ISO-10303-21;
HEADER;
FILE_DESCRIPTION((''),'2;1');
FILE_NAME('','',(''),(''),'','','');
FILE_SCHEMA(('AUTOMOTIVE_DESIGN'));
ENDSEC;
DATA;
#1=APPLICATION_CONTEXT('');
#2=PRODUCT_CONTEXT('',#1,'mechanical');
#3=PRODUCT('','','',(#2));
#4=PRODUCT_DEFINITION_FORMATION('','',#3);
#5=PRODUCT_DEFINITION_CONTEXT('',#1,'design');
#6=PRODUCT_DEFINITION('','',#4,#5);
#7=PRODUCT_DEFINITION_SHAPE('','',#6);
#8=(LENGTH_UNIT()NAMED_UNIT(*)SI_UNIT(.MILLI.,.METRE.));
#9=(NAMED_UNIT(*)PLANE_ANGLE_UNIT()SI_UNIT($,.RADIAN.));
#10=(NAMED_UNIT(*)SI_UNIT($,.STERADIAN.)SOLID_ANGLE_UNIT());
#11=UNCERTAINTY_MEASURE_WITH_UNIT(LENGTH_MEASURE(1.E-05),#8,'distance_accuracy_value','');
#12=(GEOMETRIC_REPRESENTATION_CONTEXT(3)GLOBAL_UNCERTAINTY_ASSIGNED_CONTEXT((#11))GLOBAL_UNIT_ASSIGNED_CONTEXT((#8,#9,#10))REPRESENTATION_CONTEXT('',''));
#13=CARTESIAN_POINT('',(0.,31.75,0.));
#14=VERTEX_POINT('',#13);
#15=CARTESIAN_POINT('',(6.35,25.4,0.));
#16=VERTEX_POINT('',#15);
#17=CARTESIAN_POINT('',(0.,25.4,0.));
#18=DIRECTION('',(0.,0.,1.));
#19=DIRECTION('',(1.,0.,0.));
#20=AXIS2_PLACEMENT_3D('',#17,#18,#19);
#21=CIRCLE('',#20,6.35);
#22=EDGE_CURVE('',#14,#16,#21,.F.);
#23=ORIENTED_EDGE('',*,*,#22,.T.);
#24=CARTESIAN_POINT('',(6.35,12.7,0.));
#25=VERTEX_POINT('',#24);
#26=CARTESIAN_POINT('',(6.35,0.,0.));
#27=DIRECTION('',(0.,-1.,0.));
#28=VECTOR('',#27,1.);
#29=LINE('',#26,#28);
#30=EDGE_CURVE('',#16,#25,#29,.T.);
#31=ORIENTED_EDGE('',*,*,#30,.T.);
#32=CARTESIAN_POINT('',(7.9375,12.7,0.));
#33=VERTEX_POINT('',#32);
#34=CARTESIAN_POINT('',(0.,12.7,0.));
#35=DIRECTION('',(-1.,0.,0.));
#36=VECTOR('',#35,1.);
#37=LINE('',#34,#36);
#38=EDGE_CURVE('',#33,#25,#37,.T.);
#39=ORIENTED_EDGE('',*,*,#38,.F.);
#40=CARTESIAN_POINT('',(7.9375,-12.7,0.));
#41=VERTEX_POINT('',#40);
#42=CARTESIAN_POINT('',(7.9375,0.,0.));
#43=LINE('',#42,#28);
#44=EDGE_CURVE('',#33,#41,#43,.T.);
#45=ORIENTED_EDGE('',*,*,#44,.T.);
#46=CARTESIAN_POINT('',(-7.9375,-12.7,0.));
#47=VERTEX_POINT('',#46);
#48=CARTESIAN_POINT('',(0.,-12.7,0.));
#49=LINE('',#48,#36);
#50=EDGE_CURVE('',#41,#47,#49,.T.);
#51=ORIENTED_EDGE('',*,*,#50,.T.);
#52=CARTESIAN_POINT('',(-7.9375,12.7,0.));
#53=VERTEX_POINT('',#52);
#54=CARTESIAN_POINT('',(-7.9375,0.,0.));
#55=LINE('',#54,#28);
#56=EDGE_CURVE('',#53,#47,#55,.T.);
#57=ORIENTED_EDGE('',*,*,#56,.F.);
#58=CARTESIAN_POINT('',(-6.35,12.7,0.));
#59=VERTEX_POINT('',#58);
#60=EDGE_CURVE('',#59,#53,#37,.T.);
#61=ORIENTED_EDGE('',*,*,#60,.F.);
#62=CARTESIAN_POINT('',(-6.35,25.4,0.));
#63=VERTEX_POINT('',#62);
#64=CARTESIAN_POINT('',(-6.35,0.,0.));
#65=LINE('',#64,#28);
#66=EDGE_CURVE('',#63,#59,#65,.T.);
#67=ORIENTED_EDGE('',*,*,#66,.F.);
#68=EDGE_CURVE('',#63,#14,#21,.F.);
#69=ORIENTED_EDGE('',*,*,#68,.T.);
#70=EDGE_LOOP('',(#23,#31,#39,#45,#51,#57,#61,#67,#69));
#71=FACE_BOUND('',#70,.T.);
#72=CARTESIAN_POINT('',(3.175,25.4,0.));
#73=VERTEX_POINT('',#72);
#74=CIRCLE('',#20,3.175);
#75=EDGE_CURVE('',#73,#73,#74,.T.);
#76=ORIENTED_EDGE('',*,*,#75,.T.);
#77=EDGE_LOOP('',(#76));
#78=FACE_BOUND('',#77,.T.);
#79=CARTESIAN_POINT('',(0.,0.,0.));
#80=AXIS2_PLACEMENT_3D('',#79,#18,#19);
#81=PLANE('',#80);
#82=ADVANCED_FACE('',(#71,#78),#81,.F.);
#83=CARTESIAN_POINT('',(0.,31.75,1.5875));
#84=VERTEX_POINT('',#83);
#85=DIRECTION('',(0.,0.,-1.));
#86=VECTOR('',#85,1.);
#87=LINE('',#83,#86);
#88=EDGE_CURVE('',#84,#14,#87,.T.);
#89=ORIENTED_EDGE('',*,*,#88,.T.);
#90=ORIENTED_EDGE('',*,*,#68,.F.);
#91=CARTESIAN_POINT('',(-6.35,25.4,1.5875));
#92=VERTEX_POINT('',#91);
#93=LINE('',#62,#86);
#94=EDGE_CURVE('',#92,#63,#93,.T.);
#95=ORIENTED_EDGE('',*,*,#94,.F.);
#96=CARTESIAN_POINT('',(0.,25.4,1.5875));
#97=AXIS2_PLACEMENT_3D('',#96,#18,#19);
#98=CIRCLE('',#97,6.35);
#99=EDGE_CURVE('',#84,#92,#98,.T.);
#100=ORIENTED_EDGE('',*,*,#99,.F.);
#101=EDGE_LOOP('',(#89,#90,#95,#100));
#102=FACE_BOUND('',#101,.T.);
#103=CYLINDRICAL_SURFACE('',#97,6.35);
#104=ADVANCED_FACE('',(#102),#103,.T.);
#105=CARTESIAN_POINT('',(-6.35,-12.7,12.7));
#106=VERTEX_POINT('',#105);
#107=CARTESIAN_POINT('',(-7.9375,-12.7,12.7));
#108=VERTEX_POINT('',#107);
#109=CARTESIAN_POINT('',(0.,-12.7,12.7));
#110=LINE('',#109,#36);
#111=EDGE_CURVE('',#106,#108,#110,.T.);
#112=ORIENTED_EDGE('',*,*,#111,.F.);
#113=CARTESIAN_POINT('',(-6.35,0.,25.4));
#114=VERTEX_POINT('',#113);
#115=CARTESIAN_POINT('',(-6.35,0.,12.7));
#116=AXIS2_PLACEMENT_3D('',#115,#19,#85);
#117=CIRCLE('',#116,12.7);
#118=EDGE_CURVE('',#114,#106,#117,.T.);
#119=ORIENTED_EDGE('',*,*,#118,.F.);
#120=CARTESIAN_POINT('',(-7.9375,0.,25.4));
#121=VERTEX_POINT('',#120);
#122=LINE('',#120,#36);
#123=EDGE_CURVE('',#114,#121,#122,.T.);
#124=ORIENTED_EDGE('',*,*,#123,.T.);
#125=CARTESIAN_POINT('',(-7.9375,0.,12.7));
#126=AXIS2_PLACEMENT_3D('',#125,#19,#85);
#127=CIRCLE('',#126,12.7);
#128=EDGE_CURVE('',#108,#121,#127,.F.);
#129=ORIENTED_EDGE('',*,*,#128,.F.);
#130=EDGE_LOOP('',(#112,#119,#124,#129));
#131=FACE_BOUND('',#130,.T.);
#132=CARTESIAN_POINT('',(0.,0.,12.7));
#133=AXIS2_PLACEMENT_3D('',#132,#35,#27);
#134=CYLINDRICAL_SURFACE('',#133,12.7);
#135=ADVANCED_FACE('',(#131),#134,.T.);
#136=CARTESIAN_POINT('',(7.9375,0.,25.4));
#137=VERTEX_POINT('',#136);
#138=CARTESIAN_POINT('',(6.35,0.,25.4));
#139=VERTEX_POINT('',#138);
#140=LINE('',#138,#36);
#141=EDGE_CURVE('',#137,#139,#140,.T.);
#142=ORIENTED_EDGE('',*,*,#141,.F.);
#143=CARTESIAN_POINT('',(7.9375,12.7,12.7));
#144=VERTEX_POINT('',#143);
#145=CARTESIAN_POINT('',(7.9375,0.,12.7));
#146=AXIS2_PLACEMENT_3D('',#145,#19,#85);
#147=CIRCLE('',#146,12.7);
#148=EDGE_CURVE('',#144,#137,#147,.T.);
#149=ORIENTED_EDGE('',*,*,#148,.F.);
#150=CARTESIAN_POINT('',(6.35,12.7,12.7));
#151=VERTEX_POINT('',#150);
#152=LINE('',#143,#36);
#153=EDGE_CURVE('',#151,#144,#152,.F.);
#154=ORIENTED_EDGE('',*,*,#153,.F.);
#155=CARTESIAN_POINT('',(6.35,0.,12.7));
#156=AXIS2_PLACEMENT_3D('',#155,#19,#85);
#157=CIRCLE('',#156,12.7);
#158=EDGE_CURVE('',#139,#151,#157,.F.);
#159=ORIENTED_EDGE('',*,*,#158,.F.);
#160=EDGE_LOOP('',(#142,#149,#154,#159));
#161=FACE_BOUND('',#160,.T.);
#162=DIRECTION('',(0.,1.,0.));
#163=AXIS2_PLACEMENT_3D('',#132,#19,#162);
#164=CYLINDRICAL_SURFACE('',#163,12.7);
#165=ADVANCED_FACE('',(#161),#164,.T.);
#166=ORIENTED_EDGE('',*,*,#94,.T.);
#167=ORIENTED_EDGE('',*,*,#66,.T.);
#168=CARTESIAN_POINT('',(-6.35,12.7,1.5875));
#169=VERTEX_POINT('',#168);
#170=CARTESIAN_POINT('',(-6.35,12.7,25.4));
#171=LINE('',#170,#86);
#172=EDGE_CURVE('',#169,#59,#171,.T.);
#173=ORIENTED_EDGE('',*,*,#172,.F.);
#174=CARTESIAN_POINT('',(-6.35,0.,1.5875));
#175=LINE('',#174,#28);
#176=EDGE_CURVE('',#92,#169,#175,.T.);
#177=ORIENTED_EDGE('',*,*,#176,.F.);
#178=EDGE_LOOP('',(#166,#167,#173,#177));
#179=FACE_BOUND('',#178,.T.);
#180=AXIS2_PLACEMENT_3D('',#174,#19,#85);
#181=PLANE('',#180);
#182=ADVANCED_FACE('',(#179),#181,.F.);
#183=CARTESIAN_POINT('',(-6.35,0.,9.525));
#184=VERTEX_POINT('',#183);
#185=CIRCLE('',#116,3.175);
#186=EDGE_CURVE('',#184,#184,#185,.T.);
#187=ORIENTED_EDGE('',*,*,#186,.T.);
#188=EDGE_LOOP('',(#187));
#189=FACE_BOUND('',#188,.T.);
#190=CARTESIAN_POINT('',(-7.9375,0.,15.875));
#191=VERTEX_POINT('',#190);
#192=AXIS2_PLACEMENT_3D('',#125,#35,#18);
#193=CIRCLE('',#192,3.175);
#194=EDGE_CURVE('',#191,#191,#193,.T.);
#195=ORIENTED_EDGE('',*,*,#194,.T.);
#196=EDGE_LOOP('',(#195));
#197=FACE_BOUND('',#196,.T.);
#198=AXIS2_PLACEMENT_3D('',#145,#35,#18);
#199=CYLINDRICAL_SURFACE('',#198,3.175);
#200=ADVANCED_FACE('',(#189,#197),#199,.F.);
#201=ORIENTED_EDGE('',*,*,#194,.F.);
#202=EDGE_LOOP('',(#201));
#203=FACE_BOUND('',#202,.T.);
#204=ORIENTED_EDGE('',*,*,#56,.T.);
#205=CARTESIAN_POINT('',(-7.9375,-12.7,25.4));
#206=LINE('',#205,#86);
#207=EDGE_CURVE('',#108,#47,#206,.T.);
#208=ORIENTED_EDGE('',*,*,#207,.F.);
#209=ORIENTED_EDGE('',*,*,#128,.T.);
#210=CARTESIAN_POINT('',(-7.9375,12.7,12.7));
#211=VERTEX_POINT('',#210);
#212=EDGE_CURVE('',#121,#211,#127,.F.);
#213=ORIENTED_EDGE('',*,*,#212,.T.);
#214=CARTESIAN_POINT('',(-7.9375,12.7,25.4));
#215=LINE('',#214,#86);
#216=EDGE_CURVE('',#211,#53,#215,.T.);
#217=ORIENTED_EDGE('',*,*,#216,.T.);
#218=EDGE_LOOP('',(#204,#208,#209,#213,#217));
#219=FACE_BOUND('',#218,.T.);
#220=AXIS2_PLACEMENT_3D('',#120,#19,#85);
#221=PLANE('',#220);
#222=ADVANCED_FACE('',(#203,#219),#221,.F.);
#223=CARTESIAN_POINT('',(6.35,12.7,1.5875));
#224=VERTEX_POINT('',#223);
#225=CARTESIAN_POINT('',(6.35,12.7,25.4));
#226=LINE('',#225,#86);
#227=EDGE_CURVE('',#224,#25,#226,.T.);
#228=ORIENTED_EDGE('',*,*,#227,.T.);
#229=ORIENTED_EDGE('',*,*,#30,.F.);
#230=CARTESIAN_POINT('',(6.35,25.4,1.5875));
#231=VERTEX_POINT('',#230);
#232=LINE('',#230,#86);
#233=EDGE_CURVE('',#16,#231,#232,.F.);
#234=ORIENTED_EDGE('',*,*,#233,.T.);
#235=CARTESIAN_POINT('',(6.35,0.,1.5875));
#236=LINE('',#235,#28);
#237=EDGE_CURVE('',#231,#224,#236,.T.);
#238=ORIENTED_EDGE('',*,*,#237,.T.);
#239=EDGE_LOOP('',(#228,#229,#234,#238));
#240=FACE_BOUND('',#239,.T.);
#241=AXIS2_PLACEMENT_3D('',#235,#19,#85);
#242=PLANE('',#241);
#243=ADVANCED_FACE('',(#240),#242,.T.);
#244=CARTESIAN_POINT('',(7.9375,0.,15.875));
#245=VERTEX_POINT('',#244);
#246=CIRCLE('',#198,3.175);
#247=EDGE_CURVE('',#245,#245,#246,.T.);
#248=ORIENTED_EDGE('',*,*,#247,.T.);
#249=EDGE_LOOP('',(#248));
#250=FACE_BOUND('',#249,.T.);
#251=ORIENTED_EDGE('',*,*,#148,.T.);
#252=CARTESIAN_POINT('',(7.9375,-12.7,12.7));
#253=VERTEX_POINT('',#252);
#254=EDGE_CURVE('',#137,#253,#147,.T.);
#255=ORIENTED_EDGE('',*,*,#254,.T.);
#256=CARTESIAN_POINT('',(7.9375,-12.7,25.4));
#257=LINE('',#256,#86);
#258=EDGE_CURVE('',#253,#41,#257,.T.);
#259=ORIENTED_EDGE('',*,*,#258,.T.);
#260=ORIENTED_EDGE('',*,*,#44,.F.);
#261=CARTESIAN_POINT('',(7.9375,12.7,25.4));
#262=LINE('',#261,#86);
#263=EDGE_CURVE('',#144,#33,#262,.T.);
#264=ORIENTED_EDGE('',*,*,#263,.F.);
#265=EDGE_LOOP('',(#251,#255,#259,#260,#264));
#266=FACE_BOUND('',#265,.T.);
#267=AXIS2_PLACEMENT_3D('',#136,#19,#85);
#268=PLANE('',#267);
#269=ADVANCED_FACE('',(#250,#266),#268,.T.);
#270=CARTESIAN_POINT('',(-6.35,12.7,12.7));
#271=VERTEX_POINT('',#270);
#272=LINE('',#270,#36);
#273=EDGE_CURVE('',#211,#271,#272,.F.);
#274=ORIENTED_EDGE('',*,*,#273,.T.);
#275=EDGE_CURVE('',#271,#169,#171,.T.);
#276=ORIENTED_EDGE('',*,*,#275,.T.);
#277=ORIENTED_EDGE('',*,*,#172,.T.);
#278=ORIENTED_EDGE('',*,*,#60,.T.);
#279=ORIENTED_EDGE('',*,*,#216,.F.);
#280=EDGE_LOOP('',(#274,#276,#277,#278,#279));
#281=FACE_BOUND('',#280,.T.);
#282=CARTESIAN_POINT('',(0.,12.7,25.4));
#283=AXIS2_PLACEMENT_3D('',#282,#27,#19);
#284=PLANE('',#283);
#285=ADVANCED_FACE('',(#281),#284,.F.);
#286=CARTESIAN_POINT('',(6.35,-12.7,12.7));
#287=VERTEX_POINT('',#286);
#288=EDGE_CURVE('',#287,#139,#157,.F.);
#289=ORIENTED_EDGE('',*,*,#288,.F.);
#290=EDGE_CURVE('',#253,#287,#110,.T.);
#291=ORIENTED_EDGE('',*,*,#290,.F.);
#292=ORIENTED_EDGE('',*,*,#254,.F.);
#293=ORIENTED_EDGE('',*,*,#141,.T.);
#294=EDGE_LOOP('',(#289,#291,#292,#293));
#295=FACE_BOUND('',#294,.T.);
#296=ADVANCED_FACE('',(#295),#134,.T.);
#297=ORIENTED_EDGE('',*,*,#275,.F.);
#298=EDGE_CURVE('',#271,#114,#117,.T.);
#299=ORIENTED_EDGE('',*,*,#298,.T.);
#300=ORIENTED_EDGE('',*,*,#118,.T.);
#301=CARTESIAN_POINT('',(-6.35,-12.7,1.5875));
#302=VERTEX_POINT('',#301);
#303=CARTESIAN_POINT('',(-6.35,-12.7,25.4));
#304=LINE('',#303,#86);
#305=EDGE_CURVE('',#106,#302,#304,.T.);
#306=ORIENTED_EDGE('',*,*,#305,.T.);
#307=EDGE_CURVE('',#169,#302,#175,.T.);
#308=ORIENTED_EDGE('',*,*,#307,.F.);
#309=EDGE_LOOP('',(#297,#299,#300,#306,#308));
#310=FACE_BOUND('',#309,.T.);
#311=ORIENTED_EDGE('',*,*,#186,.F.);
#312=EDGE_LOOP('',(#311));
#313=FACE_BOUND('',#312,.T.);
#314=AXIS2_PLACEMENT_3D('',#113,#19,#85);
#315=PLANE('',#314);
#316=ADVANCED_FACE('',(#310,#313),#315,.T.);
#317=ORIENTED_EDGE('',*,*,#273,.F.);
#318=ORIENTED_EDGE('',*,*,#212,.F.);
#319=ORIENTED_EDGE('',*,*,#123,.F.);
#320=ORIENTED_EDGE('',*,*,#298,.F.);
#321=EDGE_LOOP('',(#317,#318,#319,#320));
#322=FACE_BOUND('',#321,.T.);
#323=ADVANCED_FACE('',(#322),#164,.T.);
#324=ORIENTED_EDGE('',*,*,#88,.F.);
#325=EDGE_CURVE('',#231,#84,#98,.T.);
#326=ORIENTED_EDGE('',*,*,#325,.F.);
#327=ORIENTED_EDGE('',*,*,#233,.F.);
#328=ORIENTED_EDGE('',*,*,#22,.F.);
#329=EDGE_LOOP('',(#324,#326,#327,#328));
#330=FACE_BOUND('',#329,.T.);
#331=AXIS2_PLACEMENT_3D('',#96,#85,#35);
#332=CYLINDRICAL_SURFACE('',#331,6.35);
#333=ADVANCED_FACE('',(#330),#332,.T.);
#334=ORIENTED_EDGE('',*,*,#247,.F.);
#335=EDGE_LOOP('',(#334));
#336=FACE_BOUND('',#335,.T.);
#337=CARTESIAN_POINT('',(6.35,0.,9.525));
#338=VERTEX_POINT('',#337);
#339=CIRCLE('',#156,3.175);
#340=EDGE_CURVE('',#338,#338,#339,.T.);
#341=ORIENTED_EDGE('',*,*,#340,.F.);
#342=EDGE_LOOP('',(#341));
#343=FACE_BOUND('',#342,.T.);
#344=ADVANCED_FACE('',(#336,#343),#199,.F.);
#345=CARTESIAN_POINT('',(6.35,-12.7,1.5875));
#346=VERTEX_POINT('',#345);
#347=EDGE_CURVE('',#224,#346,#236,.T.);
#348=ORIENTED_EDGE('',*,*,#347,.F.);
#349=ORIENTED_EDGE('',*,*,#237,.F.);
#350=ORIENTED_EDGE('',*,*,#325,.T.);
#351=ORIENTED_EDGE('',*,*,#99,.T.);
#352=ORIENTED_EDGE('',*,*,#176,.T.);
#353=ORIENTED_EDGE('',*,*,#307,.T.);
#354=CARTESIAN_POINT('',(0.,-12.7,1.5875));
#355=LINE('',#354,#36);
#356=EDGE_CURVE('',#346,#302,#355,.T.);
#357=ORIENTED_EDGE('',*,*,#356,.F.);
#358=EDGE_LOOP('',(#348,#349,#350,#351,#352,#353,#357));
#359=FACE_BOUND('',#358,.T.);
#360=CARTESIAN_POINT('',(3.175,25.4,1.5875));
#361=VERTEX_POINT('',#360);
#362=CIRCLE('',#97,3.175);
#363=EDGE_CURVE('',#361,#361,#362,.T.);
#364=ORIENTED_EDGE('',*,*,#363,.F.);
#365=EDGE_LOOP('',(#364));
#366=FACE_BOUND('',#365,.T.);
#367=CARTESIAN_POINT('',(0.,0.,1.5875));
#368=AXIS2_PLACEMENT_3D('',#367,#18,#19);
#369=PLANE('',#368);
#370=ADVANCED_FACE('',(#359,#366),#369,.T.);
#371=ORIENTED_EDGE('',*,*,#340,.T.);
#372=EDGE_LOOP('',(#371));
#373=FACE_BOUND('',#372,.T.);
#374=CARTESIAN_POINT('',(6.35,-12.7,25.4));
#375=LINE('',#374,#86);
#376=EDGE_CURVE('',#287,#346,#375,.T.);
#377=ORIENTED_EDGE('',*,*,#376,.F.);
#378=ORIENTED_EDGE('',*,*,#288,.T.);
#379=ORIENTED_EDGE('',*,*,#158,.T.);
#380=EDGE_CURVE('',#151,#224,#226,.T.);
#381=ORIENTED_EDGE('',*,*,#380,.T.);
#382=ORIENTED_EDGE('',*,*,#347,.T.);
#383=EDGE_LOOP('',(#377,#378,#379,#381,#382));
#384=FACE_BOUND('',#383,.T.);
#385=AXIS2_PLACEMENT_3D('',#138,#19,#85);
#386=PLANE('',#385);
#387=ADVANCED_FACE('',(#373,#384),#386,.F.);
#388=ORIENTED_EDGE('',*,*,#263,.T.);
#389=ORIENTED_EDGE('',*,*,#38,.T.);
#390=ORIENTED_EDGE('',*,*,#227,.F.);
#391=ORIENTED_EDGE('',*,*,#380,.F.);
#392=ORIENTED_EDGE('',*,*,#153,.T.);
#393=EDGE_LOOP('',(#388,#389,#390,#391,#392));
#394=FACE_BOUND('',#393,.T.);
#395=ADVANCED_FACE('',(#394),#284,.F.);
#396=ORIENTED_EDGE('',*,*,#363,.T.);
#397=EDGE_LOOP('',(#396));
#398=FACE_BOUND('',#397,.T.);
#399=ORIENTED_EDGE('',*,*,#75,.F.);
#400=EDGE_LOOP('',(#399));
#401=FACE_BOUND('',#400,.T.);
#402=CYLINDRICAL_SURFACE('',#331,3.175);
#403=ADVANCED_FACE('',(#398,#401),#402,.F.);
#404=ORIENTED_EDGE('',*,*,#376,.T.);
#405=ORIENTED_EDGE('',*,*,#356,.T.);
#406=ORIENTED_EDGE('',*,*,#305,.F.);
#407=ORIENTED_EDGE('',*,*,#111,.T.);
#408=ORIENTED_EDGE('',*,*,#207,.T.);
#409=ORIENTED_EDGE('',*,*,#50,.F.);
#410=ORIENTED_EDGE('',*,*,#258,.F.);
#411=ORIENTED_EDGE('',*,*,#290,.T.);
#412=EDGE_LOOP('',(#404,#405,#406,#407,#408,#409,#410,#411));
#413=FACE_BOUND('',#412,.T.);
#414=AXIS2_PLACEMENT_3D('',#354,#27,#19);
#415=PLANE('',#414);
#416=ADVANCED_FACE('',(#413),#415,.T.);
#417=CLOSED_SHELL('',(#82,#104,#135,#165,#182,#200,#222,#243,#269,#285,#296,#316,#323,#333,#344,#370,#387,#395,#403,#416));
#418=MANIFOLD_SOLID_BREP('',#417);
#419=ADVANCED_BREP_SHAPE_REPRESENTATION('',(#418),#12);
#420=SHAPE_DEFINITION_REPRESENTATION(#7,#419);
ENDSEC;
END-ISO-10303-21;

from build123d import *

# Parameters (mm, degrees)
SKETCH1_W           = 12.7
SKETCH1_H           = 25.4
SKETCH1_H_2         = 19.05
SKETCH1_R           = 3.175
BOSS_EXTRUDE1_DEPTH = 1.5875
SKETCH1_3_W         = 1.5875
SKETCH1_3_H         = 25.4
BOSS_EXTRUDE2_DEPTH = 25.4
SKETCH2_R           = 3.175
CUT_EXTRUDE1_DEPTH  = 44.649033494
FILLET1_R           = 12.7
FILLET2_R           = 6.35


with BuildPart() as part:
    # Sketch1 → Boss-Extrude1 (new body)
    # profile 1 of 2: a face of its own
    with BuildSketch(Plane.XY):
        Rectangle(SKETCH1_W, SKETCH1_H)
    # profile 2 of 2: a face of its own
    with BuildSketch(Plane.XY):
        with Locations((0, 22.225)):
            Rectangle(SKETCH1_W, SKETCH1_H_2)
        with Locations((0, 25.4)):
            Circle(SKETCH1_R, mode=Mode.SUBTRACT)
    extrude(amount=BOSS_EXTRUDE1_DEPTH)

    # Sketch1<3> → Boss-Extrude2 (add)
    with BuildSketch(Plane.XY):
        with Locations((-7.14375, 0)):
            Rectangle(SKETCH1_3_W, SKETCH1_3_H)
        with Locations((7.14375, 0)):
            Rectangle(SKETCH1_3_W, SKETCH1_3_H)
    extrude(amount=BOSS_EXTRUDE2_DEPTH)

    # Sketch2 → Cut-Extrude1 (cut, through all)
    with BuildSketch(Plane.ZY.offset(7.9375)):
        with Locations((12.7, 0)):
            Circle(SKETCH2_R)
    extrude(amount=-CUT_EXTRUDE1_DEPTH, mode=Mode.SUBTRACT)

    # Fillet1
    fillet1_edges = [part.edges().sort_by_distance(p)[0] for p in [
        (-7.14375, -12.7, 25.4),
        (7.14375, -12.7, 25.4),
        (7.14375, 12.7, 25.4),
        (-7.14375, 12.7, 25.4),
    ]]
    fillet(fillet1_edges, radius=FILLET1_R - 0.0001)  # a hair under: the kernel refuses the full size

    # Fillet2
    fillet2_edges = [part.edges().sort_by_distance(p)[0] for p in [
        (-6.35, 31.75, 0.79375),
        (6.35, 31.75, 0.79375),
    ]]
    fillet(fillet2_edges, radius=FILLET2_R - 0.0001)  # a hair under: the kernel refuses the full size


solid = part.part
